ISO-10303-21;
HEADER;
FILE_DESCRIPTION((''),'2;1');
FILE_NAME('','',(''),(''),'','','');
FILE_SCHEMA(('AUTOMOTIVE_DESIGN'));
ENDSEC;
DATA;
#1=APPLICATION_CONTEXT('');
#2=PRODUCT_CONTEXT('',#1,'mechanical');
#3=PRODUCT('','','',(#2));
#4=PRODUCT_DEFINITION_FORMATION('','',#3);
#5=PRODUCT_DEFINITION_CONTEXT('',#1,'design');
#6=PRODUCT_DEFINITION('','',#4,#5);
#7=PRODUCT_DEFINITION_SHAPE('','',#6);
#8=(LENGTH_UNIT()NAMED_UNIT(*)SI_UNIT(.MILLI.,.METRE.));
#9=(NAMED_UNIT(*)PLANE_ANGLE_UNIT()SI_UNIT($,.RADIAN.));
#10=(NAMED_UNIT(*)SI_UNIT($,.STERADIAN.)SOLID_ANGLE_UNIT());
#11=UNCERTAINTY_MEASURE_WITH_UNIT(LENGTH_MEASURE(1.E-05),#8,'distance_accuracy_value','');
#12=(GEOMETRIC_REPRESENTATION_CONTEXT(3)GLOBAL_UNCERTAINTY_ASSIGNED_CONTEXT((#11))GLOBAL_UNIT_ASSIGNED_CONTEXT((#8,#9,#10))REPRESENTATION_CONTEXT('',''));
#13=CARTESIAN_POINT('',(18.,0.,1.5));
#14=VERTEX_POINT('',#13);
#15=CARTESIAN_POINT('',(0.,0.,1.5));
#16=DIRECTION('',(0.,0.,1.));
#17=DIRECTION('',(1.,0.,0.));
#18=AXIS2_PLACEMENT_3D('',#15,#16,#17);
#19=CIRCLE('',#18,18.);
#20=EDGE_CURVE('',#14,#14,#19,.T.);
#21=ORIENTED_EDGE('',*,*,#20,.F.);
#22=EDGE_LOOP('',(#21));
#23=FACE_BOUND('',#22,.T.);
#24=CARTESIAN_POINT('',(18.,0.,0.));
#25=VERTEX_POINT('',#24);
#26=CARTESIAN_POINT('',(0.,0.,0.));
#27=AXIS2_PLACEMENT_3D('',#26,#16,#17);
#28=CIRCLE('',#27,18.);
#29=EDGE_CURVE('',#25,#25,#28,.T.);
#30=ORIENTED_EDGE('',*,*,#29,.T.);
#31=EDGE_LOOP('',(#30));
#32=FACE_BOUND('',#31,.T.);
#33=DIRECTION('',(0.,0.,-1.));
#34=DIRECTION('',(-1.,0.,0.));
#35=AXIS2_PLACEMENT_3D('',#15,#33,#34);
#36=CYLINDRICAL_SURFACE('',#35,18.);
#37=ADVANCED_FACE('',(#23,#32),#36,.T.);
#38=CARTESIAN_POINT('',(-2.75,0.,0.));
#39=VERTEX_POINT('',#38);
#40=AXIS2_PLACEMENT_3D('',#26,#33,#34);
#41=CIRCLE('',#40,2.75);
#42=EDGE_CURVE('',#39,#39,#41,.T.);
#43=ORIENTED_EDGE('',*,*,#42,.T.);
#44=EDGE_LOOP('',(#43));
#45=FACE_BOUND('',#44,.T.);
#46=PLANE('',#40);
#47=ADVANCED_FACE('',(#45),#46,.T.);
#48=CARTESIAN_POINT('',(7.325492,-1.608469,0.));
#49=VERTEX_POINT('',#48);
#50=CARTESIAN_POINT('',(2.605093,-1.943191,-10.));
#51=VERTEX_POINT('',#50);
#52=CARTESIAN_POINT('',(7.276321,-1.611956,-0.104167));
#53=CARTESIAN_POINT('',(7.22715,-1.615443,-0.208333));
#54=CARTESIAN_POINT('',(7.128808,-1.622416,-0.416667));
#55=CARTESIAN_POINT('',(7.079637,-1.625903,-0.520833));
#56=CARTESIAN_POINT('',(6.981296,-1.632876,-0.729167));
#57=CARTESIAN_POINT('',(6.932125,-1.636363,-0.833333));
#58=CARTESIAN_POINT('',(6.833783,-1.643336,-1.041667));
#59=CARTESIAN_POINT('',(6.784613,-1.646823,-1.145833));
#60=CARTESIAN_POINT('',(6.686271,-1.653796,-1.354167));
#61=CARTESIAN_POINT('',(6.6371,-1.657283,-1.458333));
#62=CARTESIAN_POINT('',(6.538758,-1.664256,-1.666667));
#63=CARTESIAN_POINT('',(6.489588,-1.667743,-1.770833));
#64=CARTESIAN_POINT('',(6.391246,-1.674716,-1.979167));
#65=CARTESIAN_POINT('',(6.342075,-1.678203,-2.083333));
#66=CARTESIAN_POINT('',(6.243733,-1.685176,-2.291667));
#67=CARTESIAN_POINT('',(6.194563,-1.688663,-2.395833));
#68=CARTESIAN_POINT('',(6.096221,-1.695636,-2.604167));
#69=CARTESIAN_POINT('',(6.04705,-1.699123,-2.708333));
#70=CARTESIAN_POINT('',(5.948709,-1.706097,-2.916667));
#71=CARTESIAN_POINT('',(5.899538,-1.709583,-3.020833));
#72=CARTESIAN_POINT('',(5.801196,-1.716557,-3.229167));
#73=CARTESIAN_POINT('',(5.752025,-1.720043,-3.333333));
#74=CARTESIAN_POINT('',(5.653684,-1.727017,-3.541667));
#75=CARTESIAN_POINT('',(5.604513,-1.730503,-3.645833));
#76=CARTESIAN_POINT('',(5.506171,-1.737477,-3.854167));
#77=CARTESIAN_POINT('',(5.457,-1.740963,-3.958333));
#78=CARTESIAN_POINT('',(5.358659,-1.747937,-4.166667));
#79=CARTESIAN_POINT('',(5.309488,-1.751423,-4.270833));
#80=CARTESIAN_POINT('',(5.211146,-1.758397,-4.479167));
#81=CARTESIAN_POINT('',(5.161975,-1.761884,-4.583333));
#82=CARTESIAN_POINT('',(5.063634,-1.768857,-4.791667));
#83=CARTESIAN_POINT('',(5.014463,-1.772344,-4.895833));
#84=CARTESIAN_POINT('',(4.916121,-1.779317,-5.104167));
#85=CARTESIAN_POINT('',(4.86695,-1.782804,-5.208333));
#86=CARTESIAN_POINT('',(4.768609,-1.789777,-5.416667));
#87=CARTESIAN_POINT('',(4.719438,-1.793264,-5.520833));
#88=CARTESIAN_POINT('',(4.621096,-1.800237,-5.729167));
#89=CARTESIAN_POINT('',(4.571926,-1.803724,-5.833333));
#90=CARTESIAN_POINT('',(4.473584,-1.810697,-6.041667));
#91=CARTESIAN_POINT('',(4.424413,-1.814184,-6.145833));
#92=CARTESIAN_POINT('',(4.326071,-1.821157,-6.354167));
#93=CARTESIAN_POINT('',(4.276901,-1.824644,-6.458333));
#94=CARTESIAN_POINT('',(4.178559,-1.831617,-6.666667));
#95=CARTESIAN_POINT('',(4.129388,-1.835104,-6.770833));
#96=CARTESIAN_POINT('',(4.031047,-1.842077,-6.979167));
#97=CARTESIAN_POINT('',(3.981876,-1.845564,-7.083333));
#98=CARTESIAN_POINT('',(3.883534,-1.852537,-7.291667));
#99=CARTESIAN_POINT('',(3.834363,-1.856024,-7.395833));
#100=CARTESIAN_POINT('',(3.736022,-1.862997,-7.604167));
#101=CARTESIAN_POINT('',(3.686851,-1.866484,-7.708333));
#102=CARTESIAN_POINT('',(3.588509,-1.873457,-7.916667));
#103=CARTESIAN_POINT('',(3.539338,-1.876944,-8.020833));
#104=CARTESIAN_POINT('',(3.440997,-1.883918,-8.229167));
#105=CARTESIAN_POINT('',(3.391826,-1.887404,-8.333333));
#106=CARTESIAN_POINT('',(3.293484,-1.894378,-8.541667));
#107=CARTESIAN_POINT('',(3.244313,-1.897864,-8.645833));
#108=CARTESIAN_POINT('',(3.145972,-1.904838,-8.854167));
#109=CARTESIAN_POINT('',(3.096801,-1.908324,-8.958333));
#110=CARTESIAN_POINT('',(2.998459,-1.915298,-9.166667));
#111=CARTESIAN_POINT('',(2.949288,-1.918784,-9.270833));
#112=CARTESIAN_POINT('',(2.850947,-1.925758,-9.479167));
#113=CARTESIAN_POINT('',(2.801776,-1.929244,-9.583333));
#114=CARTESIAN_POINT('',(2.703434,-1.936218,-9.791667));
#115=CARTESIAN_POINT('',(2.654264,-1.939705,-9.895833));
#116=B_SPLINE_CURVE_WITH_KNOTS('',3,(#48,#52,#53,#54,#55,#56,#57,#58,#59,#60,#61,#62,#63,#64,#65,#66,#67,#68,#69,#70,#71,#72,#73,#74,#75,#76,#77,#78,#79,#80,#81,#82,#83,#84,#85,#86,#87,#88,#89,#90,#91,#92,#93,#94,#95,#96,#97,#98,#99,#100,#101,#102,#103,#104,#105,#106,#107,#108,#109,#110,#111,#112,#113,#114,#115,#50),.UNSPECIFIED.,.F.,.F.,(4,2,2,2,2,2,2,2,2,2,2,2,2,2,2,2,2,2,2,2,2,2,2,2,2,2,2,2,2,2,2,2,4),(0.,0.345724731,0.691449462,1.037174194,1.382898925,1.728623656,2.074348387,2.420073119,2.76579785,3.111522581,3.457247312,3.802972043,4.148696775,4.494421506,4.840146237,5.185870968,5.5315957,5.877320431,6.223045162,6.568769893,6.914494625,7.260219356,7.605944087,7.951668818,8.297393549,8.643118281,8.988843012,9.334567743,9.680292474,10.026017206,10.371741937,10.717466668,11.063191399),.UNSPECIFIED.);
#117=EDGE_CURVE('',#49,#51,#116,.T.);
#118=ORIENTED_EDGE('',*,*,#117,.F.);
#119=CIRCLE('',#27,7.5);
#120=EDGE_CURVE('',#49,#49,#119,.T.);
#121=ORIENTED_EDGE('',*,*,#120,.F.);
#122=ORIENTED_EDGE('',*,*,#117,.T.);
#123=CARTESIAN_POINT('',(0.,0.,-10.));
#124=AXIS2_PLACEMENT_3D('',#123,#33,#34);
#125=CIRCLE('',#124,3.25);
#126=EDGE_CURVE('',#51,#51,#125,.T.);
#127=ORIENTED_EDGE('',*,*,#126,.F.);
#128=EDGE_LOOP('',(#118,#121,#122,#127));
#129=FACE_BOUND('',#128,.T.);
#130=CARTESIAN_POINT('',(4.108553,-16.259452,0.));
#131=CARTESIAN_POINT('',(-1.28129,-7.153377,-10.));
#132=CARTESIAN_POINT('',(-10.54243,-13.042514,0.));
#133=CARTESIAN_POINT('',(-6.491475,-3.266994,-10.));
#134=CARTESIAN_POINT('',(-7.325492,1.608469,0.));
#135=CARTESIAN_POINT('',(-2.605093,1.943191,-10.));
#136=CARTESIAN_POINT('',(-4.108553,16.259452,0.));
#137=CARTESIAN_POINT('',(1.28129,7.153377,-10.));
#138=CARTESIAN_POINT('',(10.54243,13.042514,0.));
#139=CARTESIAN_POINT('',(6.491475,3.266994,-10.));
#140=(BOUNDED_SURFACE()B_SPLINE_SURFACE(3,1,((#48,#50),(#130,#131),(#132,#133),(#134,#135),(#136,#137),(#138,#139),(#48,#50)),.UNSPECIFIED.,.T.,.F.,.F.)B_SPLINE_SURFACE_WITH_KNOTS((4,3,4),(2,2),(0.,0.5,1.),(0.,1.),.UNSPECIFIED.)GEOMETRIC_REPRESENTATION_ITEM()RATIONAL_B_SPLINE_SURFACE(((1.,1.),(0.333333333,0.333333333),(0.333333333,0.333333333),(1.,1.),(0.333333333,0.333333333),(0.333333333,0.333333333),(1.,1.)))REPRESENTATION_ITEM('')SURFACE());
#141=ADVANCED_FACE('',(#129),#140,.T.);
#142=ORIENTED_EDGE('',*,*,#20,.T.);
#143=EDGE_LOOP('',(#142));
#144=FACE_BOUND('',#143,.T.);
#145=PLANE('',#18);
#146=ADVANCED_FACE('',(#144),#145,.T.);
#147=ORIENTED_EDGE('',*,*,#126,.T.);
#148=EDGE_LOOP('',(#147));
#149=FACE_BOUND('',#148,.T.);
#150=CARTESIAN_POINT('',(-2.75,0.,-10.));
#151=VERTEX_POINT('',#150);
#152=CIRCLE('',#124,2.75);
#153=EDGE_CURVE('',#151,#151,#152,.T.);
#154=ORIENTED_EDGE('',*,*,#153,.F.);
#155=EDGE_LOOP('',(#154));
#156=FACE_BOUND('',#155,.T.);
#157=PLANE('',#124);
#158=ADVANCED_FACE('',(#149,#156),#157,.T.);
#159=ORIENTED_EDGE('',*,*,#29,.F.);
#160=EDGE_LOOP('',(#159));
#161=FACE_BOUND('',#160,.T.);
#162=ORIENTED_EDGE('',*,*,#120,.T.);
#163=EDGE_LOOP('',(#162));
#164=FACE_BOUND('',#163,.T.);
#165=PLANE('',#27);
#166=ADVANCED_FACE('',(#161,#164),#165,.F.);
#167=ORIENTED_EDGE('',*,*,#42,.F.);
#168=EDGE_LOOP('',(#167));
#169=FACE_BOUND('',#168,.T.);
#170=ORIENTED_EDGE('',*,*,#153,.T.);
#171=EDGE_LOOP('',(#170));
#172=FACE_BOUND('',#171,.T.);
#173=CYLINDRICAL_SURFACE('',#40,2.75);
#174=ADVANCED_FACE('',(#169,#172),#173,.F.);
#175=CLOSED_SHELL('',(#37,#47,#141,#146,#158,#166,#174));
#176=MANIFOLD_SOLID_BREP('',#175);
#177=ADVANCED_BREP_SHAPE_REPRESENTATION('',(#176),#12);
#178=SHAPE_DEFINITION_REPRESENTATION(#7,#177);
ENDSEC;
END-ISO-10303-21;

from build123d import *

# Parameters (mm, degrees)
SKETCH1_R           = 18
SKETCH1_R_2         = 7.5
BOSS_EXTRUDE1_DEPTH = 1.5
SKETCH2_3_R         = 2.75
CUT_EXTRUDE1_DEPTH  = 10


with BuildPart() as part:
    # Sketch1 → Boss-Extrude1 (new body)
    # profile 1 of 2: a face of its own
    with BuildSketch(Plane.XY):
        Circle(SKETCH1_R)
        Circle(SKETCH1_R_2, mode=Mode.SUBTRACT)
    # profile 2 of 2: a face of its own
    with BuildSketch(Plane.XY):
        Circle(SKETCH1_R_2)
    extrude(amount=BOSS_EXTRUDE1_DEPTH)

    # Loft1: read off the stored shape, not the designer's step
    # Loft1: loft between two sections, ruled curve by curve
    loft1_from = [
        Edge.make_bspline([(7.325491543, -1.608469353, 0), (4.108552836, -16.259452438, 0), (-10.542430249, -13.042513732, 0), (-7.325491543, 1.608469353, 0), (-4.108552836, 16.259452438, 0), (10.542430249, 13.042513732, 0), (7.325491543, -1.608469353, 0)], [0, 0, 0, 0, 0.5, 0.5, 0.5, 1, 1, 1, 1], 3, [1, 0.333333333, 0.333333333, 1, 0.333333333, 0.333333333, 1]),
    ]
    loft1_to = [
        Edge.make_bspline([(2.605092701, -1.943191195, -10), (-1.281289689, -7.153376597, -10), (-6.491475091, -3.266994207, -10), (-2.605092701, 1.943191195, -10), (1.281289689, 7.153376597, -10), (6.491475091, 3.266994207, -10), (2.605092701, -1.943191195, -10)], [0, 0, 0, 0, 0.5, 0.5, 0.5, 1, 1, 1, 1], 3, [1, 0.333333333, 0.333333333, 1, 0.333333333, 0.333333333, 1]),
    ]
    loft1 = Solid(Shell([*[Face.make_surface_from_curves(loft1_from[k], loft1_to[k]) for k in range(1)], Face(Wire(loft1_from)), Face(Wire(loft1_to))]))
    add(loft1)

    # Sketch2<3> → Cut-Extrude1 (cut)
    with BuildSketch(Plane(origin=(0, 0, -10), x_dir=(-1, 0, 0), z_dir=(0, 0, -1))):
        Circle(SKETCH2_3_R)
    extrude(amount=-CUT_EXTRUDE1_DEPTH, mode=Mode.SUBTRACT)


solid = part.part
